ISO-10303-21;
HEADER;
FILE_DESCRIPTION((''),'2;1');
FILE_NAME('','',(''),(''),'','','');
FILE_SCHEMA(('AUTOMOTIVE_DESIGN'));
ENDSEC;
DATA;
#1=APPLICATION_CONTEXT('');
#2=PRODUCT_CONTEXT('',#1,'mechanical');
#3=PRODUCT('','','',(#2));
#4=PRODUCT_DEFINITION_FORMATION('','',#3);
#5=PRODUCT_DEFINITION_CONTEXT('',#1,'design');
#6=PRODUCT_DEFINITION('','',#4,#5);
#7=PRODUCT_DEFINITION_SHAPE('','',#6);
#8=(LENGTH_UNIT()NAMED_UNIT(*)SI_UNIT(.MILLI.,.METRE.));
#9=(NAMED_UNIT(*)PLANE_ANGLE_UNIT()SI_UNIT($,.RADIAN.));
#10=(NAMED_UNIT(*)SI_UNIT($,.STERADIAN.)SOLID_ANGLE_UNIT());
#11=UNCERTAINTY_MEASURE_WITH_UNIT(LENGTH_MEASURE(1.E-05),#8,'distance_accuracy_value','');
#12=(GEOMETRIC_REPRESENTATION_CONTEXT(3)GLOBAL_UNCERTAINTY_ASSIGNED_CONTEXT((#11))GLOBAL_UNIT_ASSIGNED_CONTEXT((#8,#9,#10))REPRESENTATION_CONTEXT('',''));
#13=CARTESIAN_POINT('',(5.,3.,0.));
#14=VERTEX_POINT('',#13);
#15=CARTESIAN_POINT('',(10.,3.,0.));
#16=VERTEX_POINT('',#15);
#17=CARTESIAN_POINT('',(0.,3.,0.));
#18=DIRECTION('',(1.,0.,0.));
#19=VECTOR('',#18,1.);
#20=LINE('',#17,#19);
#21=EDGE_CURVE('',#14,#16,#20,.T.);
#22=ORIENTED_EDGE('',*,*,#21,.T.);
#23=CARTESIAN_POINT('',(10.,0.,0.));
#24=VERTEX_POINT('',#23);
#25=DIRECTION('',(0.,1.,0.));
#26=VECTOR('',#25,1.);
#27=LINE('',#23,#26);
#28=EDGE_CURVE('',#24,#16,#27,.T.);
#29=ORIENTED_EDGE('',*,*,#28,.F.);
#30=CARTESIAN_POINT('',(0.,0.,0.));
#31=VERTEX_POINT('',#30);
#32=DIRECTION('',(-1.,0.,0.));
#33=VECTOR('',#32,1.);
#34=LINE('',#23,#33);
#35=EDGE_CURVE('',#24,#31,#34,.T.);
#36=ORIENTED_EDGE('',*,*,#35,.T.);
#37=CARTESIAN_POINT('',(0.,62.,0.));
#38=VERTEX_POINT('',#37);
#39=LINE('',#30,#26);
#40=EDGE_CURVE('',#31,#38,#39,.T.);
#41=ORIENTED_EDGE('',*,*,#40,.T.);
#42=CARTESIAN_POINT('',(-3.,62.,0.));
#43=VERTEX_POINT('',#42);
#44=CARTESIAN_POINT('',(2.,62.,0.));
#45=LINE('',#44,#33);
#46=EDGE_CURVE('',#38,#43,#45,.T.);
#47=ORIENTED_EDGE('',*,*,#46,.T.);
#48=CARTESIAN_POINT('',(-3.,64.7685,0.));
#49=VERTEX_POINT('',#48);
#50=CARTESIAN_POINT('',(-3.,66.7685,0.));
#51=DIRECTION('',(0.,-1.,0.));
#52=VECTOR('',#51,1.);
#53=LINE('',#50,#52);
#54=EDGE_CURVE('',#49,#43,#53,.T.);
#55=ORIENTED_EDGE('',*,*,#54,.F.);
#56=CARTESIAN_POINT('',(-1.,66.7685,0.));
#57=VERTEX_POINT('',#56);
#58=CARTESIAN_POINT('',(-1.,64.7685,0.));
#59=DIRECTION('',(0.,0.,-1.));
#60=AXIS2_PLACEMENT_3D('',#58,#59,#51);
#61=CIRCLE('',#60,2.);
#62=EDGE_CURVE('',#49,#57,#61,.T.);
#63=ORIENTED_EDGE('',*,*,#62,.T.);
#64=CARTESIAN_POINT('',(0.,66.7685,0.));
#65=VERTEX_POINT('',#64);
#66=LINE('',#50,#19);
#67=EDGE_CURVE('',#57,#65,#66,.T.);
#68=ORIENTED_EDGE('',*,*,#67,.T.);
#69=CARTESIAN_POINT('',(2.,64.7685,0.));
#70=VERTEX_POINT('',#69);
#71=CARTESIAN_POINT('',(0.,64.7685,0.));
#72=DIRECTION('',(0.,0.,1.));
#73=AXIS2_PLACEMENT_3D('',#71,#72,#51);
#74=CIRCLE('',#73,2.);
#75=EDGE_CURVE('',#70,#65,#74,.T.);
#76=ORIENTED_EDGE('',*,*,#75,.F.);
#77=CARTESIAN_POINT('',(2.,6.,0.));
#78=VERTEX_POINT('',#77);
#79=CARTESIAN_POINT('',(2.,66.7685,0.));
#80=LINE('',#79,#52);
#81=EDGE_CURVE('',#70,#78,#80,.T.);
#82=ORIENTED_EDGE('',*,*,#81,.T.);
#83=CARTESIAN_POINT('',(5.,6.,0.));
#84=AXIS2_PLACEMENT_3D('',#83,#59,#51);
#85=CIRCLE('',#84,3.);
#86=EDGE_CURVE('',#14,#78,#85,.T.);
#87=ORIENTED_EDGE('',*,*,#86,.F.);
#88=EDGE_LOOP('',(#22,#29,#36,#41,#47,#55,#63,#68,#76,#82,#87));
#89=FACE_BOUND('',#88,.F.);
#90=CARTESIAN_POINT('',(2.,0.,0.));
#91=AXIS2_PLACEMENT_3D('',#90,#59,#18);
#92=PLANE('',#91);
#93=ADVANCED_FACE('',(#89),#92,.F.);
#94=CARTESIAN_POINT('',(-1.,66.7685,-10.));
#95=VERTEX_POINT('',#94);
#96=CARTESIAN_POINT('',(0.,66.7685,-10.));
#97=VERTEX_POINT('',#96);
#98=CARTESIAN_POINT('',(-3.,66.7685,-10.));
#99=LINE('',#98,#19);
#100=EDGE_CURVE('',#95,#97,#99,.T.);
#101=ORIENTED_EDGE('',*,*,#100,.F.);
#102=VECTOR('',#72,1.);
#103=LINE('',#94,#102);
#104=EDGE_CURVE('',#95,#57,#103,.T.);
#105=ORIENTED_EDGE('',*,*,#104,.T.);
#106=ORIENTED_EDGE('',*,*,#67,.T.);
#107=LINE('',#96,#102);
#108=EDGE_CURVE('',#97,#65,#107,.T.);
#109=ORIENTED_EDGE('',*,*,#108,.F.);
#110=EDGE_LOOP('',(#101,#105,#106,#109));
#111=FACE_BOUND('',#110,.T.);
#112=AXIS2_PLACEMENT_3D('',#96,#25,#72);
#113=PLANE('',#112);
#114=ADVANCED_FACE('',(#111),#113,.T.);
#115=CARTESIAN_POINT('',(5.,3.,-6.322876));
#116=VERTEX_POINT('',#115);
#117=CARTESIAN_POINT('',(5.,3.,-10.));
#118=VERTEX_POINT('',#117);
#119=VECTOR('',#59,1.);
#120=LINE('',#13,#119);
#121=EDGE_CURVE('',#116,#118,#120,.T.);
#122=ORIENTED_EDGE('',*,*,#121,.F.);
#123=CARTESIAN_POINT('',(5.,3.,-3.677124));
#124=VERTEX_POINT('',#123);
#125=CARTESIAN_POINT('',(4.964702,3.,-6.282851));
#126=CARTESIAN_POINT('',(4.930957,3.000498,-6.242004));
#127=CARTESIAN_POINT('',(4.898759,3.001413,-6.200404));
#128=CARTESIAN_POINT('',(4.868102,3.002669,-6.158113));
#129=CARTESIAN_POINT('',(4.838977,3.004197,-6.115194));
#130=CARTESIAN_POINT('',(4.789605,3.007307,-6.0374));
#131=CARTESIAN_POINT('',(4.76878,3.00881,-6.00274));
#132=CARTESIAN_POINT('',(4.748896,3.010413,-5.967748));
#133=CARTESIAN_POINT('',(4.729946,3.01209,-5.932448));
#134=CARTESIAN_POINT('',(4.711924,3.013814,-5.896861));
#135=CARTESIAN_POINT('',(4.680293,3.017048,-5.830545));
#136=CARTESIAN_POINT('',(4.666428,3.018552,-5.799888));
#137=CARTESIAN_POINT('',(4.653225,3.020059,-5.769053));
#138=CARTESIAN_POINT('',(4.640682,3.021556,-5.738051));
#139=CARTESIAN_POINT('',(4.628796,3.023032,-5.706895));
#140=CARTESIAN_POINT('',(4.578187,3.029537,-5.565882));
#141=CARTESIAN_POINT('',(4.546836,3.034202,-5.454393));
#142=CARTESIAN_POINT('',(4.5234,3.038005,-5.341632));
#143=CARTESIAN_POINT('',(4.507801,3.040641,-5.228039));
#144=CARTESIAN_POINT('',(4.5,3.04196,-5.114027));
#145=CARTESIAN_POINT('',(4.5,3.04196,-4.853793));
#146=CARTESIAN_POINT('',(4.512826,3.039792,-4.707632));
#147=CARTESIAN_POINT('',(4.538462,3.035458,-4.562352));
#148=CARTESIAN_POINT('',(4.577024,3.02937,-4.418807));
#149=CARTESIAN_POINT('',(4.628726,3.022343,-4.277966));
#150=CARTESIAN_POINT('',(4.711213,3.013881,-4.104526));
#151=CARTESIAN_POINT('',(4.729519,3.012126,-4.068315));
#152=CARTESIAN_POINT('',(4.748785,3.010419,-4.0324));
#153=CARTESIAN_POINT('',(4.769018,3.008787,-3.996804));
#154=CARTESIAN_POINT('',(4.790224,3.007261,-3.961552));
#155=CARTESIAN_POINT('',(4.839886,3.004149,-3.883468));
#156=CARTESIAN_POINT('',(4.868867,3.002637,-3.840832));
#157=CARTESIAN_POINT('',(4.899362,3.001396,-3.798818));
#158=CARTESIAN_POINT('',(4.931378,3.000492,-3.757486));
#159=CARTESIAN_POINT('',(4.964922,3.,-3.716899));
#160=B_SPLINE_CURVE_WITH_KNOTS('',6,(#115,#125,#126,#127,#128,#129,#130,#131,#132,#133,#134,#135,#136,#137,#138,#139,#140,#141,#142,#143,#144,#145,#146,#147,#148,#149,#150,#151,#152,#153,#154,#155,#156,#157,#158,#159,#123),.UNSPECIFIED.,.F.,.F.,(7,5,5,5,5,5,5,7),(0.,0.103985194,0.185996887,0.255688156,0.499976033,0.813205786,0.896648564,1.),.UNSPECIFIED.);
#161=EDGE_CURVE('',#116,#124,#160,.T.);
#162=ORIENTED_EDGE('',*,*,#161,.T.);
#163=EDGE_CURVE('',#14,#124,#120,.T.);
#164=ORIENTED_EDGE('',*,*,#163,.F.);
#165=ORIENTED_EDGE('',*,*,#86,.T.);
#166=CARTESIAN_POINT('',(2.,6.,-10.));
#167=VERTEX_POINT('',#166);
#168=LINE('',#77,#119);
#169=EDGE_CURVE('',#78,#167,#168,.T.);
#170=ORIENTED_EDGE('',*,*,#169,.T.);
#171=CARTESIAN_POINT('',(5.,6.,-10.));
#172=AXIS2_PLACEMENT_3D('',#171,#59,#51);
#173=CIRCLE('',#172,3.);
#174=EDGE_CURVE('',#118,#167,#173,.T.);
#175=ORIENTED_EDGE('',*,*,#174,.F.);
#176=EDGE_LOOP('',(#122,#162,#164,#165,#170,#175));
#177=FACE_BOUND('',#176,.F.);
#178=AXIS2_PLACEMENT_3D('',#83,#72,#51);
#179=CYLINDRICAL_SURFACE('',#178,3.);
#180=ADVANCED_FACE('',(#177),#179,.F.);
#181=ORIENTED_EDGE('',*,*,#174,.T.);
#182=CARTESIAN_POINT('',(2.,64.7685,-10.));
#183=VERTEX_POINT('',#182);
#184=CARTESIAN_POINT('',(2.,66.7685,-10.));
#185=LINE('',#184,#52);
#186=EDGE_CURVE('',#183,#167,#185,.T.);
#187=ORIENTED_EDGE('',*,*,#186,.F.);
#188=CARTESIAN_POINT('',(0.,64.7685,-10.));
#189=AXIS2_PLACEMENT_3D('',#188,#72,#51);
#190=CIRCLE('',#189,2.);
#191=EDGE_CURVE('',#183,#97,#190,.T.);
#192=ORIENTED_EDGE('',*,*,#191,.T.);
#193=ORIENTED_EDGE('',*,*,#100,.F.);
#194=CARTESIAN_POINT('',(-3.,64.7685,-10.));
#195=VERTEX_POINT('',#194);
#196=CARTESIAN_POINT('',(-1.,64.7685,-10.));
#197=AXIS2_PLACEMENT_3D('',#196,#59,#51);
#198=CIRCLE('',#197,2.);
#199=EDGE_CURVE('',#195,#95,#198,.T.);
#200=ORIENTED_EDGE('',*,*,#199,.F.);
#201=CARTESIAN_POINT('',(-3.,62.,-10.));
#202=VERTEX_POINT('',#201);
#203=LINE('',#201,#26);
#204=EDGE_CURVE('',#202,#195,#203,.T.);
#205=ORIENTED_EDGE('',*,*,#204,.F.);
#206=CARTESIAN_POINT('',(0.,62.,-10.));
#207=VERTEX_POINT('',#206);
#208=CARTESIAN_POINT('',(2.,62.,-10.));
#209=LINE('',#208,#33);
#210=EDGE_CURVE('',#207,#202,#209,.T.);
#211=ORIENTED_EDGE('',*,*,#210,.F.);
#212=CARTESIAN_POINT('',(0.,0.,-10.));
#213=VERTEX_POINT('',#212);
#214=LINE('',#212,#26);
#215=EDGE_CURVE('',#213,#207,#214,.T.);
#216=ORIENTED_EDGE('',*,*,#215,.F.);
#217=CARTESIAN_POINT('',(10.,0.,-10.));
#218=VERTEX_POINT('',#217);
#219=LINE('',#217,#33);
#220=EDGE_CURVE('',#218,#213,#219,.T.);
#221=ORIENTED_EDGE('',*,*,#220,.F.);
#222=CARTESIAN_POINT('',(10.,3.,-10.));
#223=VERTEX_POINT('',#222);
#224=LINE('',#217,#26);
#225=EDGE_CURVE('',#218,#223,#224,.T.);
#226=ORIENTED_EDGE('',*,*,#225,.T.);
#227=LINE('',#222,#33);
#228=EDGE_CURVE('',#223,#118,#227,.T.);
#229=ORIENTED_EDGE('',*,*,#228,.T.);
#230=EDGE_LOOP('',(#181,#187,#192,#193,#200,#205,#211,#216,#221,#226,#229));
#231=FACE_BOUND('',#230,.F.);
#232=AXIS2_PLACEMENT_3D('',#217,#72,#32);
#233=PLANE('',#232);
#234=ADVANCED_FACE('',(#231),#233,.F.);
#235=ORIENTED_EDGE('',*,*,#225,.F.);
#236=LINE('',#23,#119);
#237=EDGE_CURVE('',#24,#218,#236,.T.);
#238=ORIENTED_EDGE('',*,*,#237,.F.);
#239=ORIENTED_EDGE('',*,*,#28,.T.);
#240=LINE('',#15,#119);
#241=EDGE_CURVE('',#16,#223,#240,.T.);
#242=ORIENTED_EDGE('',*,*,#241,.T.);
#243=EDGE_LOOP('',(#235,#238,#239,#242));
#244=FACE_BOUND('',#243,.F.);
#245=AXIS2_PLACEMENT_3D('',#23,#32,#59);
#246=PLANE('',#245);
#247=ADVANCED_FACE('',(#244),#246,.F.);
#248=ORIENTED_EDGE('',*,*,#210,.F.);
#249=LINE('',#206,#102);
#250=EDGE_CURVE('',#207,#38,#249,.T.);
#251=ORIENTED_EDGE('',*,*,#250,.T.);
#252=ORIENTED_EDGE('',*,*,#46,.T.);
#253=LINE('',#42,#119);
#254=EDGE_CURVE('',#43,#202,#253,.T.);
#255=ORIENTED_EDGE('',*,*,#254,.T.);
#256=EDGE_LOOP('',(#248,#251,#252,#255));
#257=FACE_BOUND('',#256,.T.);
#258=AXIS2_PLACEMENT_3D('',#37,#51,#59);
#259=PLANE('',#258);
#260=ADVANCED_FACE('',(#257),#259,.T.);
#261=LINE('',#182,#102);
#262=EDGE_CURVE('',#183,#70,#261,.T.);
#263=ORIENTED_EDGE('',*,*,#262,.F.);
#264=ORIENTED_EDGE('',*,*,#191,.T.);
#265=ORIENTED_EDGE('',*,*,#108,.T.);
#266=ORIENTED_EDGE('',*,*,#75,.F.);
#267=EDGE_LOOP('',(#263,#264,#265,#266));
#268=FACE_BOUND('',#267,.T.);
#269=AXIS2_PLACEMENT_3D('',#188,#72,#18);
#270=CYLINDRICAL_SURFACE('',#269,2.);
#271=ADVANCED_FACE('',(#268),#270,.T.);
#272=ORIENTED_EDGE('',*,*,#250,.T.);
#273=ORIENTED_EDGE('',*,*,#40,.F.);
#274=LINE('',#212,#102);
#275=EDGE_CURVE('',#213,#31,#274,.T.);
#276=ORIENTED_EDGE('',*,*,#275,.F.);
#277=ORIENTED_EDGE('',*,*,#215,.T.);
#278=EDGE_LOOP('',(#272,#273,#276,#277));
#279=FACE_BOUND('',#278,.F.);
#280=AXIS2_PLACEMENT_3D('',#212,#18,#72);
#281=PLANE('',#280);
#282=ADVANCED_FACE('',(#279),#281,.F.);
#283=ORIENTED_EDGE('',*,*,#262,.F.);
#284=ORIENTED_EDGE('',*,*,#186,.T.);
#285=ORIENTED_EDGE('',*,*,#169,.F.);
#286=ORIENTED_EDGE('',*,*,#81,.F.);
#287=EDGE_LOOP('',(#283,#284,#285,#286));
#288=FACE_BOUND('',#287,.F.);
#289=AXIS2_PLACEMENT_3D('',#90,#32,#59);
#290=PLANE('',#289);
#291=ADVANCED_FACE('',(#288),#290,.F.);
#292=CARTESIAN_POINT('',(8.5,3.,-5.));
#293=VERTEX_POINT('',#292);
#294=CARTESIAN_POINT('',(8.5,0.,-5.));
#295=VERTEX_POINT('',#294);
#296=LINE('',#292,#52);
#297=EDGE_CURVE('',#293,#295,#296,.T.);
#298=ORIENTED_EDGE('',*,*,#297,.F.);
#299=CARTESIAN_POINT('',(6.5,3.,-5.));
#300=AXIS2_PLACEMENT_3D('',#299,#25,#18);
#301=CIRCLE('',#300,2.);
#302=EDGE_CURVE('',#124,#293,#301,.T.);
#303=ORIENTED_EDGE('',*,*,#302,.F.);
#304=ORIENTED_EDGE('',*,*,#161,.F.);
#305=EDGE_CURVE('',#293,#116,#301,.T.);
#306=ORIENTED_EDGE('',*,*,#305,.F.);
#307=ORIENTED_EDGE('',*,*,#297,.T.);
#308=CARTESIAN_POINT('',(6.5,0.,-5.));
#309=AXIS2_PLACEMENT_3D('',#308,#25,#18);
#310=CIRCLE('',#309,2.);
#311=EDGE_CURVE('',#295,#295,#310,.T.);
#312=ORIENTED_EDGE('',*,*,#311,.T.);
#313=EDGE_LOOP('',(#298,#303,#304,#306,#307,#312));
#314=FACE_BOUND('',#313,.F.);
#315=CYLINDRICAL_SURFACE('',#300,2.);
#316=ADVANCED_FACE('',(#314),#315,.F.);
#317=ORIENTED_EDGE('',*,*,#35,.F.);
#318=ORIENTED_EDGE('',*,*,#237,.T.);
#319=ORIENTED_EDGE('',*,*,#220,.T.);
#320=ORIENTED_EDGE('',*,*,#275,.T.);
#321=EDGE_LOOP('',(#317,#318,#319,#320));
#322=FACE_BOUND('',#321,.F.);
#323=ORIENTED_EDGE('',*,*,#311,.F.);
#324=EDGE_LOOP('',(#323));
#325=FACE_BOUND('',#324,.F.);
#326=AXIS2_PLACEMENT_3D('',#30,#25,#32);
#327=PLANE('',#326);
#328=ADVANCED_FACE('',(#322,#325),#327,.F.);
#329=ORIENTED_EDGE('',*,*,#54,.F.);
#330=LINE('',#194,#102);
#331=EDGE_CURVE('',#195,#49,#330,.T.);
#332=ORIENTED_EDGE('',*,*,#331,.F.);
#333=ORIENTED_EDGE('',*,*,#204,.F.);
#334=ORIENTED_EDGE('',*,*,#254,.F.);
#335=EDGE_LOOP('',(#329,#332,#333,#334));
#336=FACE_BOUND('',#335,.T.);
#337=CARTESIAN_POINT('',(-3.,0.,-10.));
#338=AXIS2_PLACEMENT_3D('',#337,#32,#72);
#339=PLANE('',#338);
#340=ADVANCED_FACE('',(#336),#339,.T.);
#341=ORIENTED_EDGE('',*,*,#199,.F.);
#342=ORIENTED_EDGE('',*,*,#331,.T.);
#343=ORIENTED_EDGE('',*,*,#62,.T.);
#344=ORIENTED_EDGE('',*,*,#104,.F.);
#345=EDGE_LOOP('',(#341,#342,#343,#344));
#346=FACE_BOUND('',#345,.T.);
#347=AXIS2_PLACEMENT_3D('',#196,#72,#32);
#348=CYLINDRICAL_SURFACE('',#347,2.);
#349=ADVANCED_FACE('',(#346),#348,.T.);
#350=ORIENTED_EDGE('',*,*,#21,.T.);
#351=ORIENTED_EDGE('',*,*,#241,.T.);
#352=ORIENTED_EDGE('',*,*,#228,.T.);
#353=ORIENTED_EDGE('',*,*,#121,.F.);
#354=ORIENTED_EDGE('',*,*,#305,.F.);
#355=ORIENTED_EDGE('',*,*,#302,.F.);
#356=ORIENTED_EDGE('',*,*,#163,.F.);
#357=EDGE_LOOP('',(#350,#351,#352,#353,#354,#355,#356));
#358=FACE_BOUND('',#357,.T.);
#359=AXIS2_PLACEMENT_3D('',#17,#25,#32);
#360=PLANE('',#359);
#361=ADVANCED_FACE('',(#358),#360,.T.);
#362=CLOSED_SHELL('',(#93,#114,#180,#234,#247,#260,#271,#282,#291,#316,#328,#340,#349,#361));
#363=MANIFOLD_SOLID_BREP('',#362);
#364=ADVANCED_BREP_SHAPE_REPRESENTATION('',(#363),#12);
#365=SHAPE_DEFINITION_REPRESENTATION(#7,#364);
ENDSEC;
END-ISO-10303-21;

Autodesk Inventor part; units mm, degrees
ref_plane "YZ Plane" through (0, 0, 0) normal (1, 0, 0) x (0, 1, 0)
ref_plane "XZ Plane" through (0, 0, 0) normal (0, 1, 0) x (-1, 0, 0)
ref_plane "XY Plane" through (0, 0, 0) normal (0, 0, 1) x (1, 0, 0)
sketch "Sketch1" plane through (0, 0, 0) normal (0, 1, 0) x (-1, 0, 0)
  line L0 (0, 0) -> (-10, 0)
  line L1 (-10, 0) -> (-10, -10)
  line L2 (-10, -10) -> (0, -10)
  line L3 (0, -10) -> (0, 0)
  line L4 (0, 0) -> (-2, 0)
  line L5 (-2, 0) -> (-2, -10)
  dimension "d0" = 10
  dimension "d1" = 10
  dimension "d2" = 2
extrude "Extrusion1" add sketch "Sketch1" along normal blind 3 contours L5 L2 L1 L0
extrude "Extrusion2" add sketch "Sketch1" along normal blind 62 contours L3 L2 L5 L0
sketch "Sketch2" plane through (0, 3, 0) normal (0, 1, 0) x (1, 0, 0)
  line L0 (9.919, 10.0415) -> (10, 5)
  line L1 (10, 0) -> (10, 10) projected
  line L2 (10, 5) -> (6.5, 5)
  line L3 (2, 0) -> (2, 10) projected
  circle A0 centre (6.5, 5) radius 2
  point P0 (0, 0)
  dimension "d7" = 3.5
  dimension "d8" = 4
extrude "Extrusion3" cut sketch "Sketch2" against normal blind 62
fillet "Fillet1" radius 3 1 edges at (2, 3, -5)
sketch "Sketch3" plane through (0, 0, -10) normal (-1, 0, 0) x (0, 0, 1)
  line L0 (0, 0) -> (0, 62) projected
  line L1 (0, 62) -> (0, 66.7685)
  line L2 (0, 66.7685) -> (10, 66.7685)
  line L3 (10, 66.7685) -> (10, 62)
  line L4 (10, 62) -> (0, 62) projected
  line L5 (10, 62) -> (0, 62)
  point P0 (10, 0)
extrude "Extrusion4" add sketch "Sketch3" along normal blind 3 and the other way blind 2
fillet "Fillet2" radius 2 2 edges at (2, 66.7685, -5) (-3, 66.7685, -5)
properties part number "vacuum_bin_holder" material "Aluminum, Anodized Red"
